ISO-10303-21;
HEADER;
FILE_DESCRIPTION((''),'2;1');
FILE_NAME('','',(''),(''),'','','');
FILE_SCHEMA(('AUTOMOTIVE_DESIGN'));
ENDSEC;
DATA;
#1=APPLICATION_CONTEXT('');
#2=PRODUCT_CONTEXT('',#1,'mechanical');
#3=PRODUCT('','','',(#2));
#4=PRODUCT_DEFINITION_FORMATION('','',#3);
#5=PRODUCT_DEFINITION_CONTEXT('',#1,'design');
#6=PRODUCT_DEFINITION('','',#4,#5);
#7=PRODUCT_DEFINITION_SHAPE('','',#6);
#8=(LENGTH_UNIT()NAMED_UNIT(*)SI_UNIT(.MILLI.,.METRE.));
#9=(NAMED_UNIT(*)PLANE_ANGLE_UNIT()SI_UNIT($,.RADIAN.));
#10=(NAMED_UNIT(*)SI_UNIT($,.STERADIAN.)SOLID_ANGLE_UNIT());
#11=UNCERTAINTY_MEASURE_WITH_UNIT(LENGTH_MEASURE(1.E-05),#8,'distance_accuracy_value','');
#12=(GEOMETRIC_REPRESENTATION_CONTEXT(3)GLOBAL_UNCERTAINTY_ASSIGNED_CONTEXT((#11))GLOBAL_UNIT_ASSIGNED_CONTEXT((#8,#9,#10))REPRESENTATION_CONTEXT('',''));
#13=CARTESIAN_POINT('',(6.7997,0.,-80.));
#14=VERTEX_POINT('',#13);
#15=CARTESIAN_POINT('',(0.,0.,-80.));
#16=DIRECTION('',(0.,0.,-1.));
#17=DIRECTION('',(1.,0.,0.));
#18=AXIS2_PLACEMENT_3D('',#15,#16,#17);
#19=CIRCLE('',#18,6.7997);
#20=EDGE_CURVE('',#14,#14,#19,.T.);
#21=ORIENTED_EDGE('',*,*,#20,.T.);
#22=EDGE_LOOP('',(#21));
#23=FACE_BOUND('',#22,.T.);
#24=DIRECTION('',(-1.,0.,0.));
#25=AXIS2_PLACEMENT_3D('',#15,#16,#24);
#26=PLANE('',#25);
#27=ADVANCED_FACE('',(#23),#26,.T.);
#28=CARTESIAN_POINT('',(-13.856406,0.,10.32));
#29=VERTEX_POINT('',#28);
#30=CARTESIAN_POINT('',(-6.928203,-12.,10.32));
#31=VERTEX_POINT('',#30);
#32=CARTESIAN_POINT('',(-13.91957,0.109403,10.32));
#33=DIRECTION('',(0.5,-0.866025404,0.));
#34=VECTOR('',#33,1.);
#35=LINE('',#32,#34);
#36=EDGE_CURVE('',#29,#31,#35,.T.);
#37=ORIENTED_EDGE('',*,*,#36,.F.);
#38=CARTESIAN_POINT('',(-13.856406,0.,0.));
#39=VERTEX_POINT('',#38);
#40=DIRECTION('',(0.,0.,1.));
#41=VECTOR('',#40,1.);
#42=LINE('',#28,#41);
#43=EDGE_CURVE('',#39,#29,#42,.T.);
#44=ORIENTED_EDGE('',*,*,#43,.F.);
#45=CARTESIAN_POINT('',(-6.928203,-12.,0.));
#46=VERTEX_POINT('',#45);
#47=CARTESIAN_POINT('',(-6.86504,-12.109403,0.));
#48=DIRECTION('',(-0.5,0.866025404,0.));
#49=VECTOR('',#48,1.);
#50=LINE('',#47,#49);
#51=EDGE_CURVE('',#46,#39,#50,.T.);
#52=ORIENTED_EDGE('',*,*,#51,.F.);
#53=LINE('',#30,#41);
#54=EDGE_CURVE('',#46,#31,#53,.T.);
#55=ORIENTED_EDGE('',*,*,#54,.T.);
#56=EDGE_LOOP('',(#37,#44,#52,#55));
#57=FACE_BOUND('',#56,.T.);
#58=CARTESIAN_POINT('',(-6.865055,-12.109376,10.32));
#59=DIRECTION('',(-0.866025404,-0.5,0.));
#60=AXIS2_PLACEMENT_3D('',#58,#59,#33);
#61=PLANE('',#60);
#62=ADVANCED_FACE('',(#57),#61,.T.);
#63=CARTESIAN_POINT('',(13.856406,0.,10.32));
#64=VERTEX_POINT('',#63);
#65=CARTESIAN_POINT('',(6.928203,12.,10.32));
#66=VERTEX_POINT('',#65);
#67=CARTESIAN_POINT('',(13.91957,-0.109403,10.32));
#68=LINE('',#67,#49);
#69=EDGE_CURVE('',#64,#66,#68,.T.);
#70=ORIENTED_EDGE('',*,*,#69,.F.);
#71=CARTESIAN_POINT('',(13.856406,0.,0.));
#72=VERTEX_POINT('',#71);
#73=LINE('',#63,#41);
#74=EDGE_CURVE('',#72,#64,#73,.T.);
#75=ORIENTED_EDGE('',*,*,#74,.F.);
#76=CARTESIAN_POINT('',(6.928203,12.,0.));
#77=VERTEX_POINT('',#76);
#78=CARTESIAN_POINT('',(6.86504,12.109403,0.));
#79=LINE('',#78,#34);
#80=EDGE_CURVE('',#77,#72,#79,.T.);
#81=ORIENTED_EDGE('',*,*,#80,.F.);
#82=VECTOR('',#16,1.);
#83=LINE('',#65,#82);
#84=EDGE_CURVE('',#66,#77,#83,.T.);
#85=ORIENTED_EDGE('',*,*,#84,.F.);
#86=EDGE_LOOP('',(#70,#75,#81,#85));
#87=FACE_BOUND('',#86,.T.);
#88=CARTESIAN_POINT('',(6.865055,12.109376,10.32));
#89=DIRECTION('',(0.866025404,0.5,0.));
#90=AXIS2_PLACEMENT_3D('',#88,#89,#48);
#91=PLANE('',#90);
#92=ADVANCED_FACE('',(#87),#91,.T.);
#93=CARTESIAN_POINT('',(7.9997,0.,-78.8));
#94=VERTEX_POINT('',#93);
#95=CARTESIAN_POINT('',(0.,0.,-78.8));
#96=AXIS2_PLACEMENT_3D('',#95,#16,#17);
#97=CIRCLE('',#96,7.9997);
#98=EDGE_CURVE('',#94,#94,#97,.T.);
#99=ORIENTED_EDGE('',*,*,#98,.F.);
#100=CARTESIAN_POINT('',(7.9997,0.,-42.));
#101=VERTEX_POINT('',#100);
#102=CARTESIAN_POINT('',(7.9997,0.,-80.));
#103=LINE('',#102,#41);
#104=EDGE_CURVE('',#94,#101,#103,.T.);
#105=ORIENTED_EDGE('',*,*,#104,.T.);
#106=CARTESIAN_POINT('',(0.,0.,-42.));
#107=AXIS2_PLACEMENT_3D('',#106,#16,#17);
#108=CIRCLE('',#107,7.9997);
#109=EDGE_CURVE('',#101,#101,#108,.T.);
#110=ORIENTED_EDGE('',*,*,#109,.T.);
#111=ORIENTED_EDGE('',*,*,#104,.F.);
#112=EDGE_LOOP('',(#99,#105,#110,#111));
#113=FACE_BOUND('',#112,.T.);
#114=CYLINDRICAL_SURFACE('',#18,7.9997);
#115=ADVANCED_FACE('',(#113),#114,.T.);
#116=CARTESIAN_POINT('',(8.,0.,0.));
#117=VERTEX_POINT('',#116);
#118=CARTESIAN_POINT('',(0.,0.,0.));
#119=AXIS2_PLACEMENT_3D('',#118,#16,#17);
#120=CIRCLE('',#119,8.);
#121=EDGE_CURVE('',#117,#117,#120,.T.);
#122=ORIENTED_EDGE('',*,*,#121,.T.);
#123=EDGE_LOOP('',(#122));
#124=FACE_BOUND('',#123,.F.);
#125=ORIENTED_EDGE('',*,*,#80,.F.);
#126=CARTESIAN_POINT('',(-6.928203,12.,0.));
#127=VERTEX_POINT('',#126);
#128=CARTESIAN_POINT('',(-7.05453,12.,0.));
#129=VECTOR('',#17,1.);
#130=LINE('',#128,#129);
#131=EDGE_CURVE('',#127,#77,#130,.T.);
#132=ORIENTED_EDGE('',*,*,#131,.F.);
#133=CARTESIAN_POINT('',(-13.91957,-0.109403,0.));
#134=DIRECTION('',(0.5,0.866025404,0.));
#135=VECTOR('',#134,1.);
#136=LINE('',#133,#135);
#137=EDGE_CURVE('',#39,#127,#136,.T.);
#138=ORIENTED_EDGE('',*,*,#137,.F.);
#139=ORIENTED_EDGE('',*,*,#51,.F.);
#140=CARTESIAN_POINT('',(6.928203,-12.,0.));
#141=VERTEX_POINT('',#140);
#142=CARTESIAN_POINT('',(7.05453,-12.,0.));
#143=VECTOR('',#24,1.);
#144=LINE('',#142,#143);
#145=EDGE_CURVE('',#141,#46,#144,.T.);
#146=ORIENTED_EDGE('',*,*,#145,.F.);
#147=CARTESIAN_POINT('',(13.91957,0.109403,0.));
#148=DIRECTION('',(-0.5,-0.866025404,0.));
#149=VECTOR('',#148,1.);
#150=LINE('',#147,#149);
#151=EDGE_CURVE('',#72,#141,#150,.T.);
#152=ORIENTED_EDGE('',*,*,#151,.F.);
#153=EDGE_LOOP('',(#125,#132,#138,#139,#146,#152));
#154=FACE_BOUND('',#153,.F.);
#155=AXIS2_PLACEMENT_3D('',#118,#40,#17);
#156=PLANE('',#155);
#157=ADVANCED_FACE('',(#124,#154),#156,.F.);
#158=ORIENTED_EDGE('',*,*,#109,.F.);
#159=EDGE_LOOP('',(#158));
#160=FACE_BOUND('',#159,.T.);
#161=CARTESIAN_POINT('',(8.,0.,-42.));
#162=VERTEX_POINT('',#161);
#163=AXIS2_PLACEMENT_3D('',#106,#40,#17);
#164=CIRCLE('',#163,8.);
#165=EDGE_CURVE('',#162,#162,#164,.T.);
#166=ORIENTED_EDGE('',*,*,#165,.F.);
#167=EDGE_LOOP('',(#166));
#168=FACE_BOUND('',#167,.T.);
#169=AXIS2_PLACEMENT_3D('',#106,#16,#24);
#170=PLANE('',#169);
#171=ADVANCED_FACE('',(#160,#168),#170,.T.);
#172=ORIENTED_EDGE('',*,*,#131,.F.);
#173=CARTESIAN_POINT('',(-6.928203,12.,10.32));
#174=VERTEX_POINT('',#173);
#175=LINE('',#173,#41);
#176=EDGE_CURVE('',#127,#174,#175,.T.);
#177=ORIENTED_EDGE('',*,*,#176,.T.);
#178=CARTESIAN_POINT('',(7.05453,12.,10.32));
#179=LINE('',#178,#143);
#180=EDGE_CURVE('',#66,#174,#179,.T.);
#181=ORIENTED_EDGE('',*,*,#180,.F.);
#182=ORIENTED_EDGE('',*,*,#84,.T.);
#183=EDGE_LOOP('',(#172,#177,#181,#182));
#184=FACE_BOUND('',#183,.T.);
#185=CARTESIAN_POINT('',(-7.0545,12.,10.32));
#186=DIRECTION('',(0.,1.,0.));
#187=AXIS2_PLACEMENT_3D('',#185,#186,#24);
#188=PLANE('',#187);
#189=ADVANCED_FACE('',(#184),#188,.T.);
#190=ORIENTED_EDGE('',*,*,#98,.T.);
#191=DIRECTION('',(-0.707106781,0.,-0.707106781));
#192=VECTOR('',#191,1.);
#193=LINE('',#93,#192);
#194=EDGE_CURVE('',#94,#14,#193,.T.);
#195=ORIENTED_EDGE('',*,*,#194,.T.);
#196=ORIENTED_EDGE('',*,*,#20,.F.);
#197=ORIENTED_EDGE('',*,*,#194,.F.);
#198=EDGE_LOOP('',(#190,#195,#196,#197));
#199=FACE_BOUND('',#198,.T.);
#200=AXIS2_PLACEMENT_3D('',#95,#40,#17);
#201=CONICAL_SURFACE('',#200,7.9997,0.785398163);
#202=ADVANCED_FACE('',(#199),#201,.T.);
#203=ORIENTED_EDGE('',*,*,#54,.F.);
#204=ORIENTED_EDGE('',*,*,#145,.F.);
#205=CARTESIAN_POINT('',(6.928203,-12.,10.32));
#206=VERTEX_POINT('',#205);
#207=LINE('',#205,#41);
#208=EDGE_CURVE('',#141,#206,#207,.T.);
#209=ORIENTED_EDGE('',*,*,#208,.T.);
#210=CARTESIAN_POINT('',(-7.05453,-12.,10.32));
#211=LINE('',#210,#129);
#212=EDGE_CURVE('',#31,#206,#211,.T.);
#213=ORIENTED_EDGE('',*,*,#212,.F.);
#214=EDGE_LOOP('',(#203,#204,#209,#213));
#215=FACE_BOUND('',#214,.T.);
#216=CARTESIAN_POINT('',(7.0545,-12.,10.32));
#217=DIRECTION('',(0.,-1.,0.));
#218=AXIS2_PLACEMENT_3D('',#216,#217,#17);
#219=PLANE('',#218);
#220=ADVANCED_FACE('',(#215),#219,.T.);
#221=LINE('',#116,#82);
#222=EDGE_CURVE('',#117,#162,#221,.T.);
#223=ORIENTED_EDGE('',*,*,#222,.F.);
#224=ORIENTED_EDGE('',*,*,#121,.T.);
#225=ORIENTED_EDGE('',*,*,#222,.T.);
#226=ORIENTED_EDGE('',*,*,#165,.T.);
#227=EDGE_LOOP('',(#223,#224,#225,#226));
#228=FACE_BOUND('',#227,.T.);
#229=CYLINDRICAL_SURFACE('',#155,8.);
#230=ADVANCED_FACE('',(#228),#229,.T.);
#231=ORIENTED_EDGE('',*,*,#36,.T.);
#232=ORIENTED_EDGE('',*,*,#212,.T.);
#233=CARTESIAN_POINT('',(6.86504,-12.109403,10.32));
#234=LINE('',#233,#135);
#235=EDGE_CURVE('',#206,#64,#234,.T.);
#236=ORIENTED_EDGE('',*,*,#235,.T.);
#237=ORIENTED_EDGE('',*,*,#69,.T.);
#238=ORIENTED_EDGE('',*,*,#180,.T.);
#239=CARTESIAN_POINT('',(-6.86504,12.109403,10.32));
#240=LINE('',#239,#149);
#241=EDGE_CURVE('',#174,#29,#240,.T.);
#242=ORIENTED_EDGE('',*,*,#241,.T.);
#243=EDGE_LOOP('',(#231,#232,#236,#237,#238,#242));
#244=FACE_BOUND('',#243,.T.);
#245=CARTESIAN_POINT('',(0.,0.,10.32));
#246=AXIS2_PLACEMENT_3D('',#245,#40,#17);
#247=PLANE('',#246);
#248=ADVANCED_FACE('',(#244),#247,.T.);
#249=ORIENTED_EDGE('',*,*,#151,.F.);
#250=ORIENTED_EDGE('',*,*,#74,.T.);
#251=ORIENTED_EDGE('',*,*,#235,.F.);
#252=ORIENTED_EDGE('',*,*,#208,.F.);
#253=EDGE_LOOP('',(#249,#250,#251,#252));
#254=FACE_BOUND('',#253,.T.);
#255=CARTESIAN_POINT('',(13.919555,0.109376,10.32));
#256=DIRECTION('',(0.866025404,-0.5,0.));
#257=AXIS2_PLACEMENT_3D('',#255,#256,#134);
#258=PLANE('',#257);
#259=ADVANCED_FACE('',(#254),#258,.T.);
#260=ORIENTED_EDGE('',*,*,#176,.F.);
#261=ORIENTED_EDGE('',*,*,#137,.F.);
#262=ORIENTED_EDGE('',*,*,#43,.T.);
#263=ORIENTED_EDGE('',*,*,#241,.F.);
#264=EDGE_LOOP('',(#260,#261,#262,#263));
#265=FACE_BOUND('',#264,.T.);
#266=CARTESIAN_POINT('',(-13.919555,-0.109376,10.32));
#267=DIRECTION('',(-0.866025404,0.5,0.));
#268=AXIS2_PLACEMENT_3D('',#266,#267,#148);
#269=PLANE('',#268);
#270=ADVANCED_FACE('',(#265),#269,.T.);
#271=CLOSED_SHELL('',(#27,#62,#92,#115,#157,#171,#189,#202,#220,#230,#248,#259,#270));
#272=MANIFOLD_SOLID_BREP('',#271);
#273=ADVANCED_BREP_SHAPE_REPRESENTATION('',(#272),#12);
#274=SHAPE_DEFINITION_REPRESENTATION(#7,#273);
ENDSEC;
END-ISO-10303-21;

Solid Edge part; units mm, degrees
sketch "Sketch1" plane through (0, 0, 0) normal (0, 0, 1) x (1, 0, 0)
  circle A0 centre (0, 0) radius 13.92
  dimension "D1" = 27.84
extrude "Protrusion1" add sketch "Sketch1" along normal blind 10.32
sketch "Sketch2" plane through (0, 0, 0) normal (0, 0, -1) x (1, 0, 0)
  circle A0 centre (0, 0) radius 8
extrude "Protrusion2" add sketch "Sketch2" along normal blind 80
sketch "Sketch3" plane through (0, 0, -80) normal (0, 0, -1) x (1, 0, 0)
  circle A0 centre (0, 0) radius 7.9997
extrude "Cutout1" cut sketch "Sketch3" against normal blind 38 flip side to cut
chamfer "Chamfer_1" distance 1.2 angle 45 1 edges at (-7.9997, 0, -80)
sketch "Sketch4" plane through (0, 0, 10.32) normal (0, 0, 1) x (1, 0, 0)
  line L0 (-7.0545, 12) -> (7.0545, 12)
  dimension "D1" = 24
extrude "Cutout2" cut sketch "Sketch4" against normal up to next material side at (0, 12.05, 10.32)
pattern_circular "Pattern1" count 6 over 360 about axis through (0, 0, 10.32) along (0, 0, 1) of "Cutout2"
properties part number "24104779"
